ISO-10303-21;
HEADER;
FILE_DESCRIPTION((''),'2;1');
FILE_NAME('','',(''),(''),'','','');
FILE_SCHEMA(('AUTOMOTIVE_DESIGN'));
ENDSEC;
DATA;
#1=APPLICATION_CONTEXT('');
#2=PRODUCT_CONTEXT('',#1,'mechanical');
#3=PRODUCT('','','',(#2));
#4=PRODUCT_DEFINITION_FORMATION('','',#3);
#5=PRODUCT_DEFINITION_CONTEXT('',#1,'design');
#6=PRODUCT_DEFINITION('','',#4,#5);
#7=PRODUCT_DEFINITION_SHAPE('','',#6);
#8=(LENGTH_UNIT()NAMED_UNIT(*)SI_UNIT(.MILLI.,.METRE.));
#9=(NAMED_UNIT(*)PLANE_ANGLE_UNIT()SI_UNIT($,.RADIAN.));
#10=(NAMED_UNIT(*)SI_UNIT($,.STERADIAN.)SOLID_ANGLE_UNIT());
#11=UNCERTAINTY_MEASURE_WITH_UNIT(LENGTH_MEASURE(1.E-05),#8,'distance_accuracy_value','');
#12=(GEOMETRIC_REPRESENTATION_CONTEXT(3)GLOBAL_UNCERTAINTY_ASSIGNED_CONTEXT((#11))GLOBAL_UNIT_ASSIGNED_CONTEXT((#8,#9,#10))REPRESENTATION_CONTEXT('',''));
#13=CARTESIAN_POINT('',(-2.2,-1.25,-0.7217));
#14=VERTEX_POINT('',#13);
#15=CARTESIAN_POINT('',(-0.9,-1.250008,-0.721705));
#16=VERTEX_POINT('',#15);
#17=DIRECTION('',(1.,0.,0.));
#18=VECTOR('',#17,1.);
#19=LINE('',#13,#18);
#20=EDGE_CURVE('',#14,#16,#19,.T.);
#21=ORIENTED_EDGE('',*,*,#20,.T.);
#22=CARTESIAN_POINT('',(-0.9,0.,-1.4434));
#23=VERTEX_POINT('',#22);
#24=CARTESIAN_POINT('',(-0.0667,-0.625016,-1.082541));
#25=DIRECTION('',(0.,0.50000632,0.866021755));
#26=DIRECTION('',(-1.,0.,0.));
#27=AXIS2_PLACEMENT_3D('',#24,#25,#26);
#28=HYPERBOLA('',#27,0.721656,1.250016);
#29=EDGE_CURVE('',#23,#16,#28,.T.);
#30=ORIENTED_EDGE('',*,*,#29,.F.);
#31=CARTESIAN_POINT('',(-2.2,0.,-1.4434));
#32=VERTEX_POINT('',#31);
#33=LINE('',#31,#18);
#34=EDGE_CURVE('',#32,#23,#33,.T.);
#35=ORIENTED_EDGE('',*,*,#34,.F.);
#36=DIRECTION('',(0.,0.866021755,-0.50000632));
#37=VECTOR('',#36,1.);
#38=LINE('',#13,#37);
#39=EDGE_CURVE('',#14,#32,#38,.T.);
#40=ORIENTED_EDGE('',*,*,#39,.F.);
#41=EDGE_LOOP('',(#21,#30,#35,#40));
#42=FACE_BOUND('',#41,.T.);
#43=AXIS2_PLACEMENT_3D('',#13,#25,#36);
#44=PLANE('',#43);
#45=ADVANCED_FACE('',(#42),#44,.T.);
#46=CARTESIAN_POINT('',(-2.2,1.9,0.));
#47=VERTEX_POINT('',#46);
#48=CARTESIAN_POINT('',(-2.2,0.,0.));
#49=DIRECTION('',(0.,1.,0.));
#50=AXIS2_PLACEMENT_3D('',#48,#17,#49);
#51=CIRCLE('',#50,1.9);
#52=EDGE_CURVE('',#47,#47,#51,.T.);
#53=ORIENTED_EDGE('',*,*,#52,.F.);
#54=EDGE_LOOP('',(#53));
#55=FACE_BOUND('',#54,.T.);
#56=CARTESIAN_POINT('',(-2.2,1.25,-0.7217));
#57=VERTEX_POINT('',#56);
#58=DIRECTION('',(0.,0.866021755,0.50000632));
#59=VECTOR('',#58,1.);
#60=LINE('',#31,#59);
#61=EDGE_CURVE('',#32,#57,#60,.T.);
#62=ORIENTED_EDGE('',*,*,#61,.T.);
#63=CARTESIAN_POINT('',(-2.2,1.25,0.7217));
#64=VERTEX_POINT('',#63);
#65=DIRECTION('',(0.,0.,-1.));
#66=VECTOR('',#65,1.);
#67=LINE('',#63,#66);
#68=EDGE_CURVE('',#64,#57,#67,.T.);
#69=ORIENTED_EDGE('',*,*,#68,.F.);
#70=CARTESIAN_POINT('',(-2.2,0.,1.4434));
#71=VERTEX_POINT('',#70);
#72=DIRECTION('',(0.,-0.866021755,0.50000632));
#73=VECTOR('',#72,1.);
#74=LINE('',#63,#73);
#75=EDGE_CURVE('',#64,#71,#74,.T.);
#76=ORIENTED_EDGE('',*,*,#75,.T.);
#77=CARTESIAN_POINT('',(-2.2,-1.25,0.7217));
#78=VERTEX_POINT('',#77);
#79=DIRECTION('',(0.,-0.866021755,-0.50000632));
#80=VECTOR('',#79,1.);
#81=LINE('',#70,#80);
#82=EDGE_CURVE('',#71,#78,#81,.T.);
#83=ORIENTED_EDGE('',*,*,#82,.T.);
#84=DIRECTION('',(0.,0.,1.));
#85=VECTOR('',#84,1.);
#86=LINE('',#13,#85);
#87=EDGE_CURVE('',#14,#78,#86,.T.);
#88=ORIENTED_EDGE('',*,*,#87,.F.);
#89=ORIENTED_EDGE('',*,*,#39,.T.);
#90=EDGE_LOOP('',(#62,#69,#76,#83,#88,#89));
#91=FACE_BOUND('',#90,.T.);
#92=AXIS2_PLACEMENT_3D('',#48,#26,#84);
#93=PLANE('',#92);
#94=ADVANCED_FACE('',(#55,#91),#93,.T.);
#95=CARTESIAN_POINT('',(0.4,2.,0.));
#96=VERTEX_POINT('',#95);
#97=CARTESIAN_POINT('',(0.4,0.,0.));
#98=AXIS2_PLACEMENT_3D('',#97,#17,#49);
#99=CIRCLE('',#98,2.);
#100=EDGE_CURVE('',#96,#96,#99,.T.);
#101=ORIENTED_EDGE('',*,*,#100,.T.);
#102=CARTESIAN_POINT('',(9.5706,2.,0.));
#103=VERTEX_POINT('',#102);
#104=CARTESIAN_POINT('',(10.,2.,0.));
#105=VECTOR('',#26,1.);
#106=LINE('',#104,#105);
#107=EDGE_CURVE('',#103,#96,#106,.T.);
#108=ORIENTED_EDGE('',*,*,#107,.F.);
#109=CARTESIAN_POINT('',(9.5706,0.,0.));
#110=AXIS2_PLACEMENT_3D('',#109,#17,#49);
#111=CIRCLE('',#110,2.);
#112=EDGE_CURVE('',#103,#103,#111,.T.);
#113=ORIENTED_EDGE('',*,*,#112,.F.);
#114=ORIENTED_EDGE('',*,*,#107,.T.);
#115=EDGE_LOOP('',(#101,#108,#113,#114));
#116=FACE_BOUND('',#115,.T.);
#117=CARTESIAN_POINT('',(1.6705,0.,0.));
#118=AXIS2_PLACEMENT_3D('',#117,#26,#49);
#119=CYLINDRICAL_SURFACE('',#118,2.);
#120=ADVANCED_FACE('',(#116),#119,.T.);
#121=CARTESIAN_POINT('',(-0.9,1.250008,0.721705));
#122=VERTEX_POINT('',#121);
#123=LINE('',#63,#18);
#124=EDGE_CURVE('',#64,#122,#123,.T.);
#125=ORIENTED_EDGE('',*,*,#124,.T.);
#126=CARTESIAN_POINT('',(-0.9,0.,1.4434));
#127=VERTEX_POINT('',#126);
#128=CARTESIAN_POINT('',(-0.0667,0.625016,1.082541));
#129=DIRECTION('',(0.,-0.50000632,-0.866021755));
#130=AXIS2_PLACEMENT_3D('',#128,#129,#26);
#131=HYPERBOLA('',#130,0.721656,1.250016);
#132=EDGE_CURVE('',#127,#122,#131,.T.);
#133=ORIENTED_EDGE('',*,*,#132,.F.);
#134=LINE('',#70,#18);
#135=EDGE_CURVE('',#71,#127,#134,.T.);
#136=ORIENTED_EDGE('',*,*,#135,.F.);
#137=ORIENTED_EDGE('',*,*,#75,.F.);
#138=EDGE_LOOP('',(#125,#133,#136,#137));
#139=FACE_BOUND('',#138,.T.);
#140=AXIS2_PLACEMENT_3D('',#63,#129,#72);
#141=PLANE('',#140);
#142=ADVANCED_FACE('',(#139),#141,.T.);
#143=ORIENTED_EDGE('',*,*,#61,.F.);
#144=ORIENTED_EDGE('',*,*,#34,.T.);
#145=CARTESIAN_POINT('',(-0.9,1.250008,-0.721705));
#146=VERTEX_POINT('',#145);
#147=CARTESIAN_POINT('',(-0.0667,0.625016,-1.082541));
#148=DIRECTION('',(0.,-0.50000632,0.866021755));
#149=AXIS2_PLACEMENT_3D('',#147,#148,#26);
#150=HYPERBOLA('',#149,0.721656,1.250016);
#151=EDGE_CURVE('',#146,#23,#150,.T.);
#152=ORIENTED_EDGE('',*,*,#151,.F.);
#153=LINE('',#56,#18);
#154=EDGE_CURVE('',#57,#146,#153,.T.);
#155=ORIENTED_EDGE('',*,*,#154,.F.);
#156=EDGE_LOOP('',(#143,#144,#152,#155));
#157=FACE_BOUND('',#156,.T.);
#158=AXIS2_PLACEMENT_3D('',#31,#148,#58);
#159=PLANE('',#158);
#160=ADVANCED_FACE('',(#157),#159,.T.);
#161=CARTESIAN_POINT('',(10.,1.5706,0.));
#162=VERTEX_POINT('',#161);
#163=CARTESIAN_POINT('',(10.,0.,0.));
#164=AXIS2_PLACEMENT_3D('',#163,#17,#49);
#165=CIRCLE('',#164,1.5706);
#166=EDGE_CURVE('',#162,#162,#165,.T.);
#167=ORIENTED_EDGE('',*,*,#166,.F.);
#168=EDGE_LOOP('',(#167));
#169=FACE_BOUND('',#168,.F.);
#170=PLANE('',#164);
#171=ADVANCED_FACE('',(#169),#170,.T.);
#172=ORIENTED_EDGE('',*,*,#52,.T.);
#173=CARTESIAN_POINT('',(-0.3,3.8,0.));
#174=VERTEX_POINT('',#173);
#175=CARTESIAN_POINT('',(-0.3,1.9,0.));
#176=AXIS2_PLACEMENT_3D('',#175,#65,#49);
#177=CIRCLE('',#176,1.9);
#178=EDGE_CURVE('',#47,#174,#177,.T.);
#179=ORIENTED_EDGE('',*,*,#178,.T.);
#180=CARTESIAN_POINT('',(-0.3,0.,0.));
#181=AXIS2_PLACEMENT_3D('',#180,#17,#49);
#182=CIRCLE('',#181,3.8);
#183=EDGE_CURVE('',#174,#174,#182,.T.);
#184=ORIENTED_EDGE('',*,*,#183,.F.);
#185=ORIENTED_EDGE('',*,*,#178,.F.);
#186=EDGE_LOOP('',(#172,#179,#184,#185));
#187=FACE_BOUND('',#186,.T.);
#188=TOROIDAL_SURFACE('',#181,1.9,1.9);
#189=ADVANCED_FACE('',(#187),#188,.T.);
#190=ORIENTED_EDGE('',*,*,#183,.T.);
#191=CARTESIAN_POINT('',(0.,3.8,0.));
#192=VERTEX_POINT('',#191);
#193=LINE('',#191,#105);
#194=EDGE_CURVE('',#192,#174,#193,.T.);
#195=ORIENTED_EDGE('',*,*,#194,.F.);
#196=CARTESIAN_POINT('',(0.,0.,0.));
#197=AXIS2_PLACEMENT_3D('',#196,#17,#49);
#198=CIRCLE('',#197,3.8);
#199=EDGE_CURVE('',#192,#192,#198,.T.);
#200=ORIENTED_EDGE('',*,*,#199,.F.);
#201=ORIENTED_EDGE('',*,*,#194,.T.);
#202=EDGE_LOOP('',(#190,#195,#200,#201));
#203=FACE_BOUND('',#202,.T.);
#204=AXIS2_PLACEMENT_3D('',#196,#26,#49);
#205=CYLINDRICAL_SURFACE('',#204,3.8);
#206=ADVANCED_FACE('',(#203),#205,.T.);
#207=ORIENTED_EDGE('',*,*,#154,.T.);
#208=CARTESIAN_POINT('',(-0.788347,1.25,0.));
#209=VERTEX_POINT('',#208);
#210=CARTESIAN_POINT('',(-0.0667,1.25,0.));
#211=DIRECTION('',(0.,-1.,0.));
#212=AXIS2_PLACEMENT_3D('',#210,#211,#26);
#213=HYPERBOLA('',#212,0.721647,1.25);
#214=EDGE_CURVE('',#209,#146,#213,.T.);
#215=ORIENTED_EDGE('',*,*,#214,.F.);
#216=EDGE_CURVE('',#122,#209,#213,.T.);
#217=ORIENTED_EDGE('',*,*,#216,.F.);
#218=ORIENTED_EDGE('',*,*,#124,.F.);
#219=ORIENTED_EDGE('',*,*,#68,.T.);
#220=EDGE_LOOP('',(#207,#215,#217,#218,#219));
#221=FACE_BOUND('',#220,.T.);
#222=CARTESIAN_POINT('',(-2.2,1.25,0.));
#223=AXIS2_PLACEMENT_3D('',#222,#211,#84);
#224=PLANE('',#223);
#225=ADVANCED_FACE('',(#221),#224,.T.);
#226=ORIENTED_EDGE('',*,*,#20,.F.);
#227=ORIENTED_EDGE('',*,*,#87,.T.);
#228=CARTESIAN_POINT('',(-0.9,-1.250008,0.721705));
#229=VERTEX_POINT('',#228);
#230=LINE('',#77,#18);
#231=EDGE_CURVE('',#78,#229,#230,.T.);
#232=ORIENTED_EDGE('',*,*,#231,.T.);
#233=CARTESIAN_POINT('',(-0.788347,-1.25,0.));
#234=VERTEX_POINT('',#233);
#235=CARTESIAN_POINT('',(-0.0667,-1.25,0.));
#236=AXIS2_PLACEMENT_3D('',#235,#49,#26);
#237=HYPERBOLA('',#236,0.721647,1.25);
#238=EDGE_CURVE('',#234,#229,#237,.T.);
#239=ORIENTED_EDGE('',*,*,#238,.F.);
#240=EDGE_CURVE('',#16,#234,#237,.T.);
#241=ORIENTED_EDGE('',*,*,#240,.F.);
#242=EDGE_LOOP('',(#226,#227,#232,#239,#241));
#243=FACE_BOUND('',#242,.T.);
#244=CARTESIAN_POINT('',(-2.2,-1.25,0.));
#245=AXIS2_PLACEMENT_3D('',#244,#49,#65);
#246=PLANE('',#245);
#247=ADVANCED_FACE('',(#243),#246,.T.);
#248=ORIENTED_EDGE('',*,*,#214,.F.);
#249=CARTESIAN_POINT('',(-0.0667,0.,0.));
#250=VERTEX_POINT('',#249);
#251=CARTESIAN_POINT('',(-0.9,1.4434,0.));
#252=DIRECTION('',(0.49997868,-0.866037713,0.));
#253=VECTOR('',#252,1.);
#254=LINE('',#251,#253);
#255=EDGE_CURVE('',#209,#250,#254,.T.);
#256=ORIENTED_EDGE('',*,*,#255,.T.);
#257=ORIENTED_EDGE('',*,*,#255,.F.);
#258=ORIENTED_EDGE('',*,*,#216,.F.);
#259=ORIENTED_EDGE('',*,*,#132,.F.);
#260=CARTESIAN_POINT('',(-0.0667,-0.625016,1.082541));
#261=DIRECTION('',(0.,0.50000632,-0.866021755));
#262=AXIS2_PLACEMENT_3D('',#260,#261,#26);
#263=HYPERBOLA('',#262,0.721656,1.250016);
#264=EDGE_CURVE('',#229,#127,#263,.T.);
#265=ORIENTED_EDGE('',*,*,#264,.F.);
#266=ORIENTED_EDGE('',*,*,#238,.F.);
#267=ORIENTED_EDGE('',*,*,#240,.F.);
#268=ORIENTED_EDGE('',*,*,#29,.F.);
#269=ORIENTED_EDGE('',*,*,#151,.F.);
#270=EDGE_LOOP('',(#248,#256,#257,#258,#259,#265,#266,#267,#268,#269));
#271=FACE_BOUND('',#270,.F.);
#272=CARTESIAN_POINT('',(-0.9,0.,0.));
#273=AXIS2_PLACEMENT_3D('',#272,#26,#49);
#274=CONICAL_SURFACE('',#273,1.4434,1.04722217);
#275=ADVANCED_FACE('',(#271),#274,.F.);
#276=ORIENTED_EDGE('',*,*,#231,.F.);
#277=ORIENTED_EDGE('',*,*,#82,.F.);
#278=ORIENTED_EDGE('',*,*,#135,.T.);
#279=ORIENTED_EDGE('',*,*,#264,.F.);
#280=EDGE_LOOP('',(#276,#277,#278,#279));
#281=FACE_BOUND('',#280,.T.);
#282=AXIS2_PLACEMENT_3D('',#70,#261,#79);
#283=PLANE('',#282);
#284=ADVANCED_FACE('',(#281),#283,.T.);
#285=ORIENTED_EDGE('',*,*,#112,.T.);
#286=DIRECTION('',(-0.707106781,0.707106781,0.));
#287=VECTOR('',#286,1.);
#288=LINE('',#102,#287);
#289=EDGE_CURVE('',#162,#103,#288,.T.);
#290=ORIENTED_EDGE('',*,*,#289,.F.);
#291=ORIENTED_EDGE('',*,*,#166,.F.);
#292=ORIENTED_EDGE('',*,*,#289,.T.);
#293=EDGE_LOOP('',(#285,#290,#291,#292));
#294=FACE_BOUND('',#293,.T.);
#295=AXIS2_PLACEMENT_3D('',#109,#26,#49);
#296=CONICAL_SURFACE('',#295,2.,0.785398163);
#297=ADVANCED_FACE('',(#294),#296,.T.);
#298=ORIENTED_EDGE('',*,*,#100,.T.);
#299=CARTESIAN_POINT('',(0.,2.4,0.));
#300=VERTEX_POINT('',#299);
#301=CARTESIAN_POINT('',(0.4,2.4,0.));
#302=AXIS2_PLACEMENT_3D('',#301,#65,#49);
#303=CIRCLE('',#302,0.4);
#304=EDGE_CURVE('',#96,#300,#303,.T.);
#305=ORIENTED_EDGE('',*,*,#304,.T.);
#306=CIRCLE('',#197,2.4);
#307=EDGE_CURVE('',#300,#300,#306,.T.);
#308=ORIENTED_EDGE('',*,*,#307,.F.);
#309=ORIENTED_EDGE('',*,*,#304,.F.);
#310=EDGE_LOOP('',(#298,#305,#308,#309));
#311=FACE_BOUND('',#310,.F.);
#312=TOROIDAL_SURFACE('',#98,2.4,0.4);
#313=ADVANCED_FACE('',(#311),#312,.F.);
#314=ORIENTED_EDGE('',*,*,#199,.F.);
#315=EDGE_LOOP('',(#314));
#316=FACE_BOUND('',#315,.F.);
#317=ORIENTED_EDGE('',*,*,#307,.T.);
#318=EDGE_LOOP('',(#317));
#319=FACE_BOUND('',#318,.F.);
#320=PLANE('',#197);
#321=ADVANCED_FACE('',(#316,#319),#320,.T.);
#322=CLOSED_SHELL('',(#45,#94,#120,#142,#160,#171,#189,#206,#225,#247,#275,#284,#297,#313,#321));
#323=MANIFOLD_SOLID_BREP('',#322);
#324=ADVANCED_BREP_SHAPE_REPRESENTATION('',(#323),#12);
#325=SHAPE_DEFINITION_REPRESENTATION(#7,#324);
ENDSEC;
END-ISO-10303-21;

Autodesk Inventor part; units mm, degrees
ref_plane "YZ Plane" through (0, 0, 0) normal (1, 0, 0) x (0, 1, 0)
ref_plane "XZ Plane" through (0, 0, 0) normal (0, 1, 0) x (-1, 0, 0)
sketch "Sketch1" plane through (0, 0, 0) normal (0, 0, 1) x (1, 0, 0)
  line L0 (-0.0667, 0) -> (10, 0)
  line L1 (10, 0) -> (10, 2)
  line L2 (10, 2) -> (2.1, 2)
  line L3 (2.1, 2) -> (1.6705, 2)
  line L4 (1.6705, 2) -> (0, 2)
  line L5 (0, 2) -> (0, 3.8)
  line L6 (0, 3.8) -> (-2.2, 3.8)
  line L7 (-2.2, 3.8) -> (-2.2, 1.4434)
  line L8 (-2.2, 1.4434) -> (-0.9, 1.4434)
  line L9 (-0.9, 1.4434) -> (-0.0667, 0)
  line L10 (-4.64, 0) -> (12.44, 0) projected
  line L11 (0, -0.76) -> (0, 4.56) projected
  line L12 (2.1, 2) -> (0, 2) construction
  dimension "d1" = 7.9
  dimension "d2" = 0.4295
  dimension "d3" = 2.2
  dimension "d4" = 1.3
  dimension "d5" = 60
  dimension "d6" = 4
  dimension "d7" = 4
  dimension "d8" = 2.8868
  dimension "d9" = 7.6
  dimension "d26" = 10
revolve "Body" add sketch "Sketch1" angle 360 about axis through (-0.0667, 0, 0) along (1, 0, 0)
sketch "Sketch2" plane through (-2.2, 0, 0) normal (-1, 0, 0) x (0, 0, 1)
  circle A0 centre (0, 0) radius 1.4434 projected
  line L0 (0, -5.32) -> (0, 5.32) projected
  line L1 (-5.32, 0) -> (5.32, 0) projected
  line L2 (1.4434, 0) -> (0.7217, -1.25)
  line L3 (0.7217, -1.25) -> (-0.7217, -1.25)
  line L4 (-0.7217, -1.25) -> (-1.4434, 0)
  line L5 (-1.4434, 0) -> (-0.7217, 1.25)
  line L6 (-0.7217, 1.25) -> (0.7217, 1.25)
  line L7 (0.7217, 1.25) -> (1.4434, 0)
extrude "Slot" add sketch "Sketch2" against normal up to next contours L7 A0 | A0 L2 | L6 L0 A0 | A0 L0 L3 | L0 L6 A0 | A0 L3 L0 | L4 A0 | A0 L5
fillet "Fillet1" radius 1.9 1 edges at (-2.2, -3.8, 0)
thread "Thread" size "M4x0.7" class "6g" standard "ISO Metric profile" length 7.9
chamfer "Chamfer1" distance 0.4294 distance2 0.4294 1 edges at (10, -2, 0) measured on face at (10, 0.556, 0.0273)
ref_plane "Work Plane1" through (29, 0, 0) normal (0, -1, 0) x (1, 0, 0)
fillet "Fillet2" radius 0.4 1 edges at (0, -2, 0)
equation "\"d1\" = GEL"
equation "\"d3\" = KOH"
equation "\"d4\" = INTI"
equation "\"d6\" = GD"
equation "\"d7\" = BDM"
equation "\"d8\" = 1.1547 * SW"
equation "\"d9\" = KOD"
equation "\"d26\" = NLG"
equation "\"d30\" = R"
equation "\"d17\" = RR"
equation "\"d13\" = GEL"
equation "\"d15\" = -0.5 * SPD + 0.5 * GD"
equation "\"d16\" = GUL"
equation "\"GD\" = NND"
equation "\"NLG\" = 10"
equation "\"GEL\" = 7.9"
equation "\"KOD\" = 7.6"
equation "\"KOH\" = 2.2"
equation "\"INTI\" = 1.3"
equation "\"GAL\" = 0.61345 * PTC"
equation "\"GUL\" = 0.61345 * PTC"
equation "\"BDM\" = NND"
equation "\"SW\" = 2.5"
equation "\"RR\" = 1.9"
equation "\"SPD\" = NND - 1.2269 * PTC"
equation "\"R\" = 0.4"
equation "\"TOA\" = 30deg"
equation "\"GD1\" = THREADDIA - 1.2269 * PTC"
equation "\"THREADDIA\" = 4"
equation "\"PTC\" = 0.7"
equation "\"NND\" = 4"
equation "\"KOH1\" = 0.3"
equation "\"E0\" = 2.873"
properties part number "ISO 7380-1 - M4 x 10" material "Steel"
